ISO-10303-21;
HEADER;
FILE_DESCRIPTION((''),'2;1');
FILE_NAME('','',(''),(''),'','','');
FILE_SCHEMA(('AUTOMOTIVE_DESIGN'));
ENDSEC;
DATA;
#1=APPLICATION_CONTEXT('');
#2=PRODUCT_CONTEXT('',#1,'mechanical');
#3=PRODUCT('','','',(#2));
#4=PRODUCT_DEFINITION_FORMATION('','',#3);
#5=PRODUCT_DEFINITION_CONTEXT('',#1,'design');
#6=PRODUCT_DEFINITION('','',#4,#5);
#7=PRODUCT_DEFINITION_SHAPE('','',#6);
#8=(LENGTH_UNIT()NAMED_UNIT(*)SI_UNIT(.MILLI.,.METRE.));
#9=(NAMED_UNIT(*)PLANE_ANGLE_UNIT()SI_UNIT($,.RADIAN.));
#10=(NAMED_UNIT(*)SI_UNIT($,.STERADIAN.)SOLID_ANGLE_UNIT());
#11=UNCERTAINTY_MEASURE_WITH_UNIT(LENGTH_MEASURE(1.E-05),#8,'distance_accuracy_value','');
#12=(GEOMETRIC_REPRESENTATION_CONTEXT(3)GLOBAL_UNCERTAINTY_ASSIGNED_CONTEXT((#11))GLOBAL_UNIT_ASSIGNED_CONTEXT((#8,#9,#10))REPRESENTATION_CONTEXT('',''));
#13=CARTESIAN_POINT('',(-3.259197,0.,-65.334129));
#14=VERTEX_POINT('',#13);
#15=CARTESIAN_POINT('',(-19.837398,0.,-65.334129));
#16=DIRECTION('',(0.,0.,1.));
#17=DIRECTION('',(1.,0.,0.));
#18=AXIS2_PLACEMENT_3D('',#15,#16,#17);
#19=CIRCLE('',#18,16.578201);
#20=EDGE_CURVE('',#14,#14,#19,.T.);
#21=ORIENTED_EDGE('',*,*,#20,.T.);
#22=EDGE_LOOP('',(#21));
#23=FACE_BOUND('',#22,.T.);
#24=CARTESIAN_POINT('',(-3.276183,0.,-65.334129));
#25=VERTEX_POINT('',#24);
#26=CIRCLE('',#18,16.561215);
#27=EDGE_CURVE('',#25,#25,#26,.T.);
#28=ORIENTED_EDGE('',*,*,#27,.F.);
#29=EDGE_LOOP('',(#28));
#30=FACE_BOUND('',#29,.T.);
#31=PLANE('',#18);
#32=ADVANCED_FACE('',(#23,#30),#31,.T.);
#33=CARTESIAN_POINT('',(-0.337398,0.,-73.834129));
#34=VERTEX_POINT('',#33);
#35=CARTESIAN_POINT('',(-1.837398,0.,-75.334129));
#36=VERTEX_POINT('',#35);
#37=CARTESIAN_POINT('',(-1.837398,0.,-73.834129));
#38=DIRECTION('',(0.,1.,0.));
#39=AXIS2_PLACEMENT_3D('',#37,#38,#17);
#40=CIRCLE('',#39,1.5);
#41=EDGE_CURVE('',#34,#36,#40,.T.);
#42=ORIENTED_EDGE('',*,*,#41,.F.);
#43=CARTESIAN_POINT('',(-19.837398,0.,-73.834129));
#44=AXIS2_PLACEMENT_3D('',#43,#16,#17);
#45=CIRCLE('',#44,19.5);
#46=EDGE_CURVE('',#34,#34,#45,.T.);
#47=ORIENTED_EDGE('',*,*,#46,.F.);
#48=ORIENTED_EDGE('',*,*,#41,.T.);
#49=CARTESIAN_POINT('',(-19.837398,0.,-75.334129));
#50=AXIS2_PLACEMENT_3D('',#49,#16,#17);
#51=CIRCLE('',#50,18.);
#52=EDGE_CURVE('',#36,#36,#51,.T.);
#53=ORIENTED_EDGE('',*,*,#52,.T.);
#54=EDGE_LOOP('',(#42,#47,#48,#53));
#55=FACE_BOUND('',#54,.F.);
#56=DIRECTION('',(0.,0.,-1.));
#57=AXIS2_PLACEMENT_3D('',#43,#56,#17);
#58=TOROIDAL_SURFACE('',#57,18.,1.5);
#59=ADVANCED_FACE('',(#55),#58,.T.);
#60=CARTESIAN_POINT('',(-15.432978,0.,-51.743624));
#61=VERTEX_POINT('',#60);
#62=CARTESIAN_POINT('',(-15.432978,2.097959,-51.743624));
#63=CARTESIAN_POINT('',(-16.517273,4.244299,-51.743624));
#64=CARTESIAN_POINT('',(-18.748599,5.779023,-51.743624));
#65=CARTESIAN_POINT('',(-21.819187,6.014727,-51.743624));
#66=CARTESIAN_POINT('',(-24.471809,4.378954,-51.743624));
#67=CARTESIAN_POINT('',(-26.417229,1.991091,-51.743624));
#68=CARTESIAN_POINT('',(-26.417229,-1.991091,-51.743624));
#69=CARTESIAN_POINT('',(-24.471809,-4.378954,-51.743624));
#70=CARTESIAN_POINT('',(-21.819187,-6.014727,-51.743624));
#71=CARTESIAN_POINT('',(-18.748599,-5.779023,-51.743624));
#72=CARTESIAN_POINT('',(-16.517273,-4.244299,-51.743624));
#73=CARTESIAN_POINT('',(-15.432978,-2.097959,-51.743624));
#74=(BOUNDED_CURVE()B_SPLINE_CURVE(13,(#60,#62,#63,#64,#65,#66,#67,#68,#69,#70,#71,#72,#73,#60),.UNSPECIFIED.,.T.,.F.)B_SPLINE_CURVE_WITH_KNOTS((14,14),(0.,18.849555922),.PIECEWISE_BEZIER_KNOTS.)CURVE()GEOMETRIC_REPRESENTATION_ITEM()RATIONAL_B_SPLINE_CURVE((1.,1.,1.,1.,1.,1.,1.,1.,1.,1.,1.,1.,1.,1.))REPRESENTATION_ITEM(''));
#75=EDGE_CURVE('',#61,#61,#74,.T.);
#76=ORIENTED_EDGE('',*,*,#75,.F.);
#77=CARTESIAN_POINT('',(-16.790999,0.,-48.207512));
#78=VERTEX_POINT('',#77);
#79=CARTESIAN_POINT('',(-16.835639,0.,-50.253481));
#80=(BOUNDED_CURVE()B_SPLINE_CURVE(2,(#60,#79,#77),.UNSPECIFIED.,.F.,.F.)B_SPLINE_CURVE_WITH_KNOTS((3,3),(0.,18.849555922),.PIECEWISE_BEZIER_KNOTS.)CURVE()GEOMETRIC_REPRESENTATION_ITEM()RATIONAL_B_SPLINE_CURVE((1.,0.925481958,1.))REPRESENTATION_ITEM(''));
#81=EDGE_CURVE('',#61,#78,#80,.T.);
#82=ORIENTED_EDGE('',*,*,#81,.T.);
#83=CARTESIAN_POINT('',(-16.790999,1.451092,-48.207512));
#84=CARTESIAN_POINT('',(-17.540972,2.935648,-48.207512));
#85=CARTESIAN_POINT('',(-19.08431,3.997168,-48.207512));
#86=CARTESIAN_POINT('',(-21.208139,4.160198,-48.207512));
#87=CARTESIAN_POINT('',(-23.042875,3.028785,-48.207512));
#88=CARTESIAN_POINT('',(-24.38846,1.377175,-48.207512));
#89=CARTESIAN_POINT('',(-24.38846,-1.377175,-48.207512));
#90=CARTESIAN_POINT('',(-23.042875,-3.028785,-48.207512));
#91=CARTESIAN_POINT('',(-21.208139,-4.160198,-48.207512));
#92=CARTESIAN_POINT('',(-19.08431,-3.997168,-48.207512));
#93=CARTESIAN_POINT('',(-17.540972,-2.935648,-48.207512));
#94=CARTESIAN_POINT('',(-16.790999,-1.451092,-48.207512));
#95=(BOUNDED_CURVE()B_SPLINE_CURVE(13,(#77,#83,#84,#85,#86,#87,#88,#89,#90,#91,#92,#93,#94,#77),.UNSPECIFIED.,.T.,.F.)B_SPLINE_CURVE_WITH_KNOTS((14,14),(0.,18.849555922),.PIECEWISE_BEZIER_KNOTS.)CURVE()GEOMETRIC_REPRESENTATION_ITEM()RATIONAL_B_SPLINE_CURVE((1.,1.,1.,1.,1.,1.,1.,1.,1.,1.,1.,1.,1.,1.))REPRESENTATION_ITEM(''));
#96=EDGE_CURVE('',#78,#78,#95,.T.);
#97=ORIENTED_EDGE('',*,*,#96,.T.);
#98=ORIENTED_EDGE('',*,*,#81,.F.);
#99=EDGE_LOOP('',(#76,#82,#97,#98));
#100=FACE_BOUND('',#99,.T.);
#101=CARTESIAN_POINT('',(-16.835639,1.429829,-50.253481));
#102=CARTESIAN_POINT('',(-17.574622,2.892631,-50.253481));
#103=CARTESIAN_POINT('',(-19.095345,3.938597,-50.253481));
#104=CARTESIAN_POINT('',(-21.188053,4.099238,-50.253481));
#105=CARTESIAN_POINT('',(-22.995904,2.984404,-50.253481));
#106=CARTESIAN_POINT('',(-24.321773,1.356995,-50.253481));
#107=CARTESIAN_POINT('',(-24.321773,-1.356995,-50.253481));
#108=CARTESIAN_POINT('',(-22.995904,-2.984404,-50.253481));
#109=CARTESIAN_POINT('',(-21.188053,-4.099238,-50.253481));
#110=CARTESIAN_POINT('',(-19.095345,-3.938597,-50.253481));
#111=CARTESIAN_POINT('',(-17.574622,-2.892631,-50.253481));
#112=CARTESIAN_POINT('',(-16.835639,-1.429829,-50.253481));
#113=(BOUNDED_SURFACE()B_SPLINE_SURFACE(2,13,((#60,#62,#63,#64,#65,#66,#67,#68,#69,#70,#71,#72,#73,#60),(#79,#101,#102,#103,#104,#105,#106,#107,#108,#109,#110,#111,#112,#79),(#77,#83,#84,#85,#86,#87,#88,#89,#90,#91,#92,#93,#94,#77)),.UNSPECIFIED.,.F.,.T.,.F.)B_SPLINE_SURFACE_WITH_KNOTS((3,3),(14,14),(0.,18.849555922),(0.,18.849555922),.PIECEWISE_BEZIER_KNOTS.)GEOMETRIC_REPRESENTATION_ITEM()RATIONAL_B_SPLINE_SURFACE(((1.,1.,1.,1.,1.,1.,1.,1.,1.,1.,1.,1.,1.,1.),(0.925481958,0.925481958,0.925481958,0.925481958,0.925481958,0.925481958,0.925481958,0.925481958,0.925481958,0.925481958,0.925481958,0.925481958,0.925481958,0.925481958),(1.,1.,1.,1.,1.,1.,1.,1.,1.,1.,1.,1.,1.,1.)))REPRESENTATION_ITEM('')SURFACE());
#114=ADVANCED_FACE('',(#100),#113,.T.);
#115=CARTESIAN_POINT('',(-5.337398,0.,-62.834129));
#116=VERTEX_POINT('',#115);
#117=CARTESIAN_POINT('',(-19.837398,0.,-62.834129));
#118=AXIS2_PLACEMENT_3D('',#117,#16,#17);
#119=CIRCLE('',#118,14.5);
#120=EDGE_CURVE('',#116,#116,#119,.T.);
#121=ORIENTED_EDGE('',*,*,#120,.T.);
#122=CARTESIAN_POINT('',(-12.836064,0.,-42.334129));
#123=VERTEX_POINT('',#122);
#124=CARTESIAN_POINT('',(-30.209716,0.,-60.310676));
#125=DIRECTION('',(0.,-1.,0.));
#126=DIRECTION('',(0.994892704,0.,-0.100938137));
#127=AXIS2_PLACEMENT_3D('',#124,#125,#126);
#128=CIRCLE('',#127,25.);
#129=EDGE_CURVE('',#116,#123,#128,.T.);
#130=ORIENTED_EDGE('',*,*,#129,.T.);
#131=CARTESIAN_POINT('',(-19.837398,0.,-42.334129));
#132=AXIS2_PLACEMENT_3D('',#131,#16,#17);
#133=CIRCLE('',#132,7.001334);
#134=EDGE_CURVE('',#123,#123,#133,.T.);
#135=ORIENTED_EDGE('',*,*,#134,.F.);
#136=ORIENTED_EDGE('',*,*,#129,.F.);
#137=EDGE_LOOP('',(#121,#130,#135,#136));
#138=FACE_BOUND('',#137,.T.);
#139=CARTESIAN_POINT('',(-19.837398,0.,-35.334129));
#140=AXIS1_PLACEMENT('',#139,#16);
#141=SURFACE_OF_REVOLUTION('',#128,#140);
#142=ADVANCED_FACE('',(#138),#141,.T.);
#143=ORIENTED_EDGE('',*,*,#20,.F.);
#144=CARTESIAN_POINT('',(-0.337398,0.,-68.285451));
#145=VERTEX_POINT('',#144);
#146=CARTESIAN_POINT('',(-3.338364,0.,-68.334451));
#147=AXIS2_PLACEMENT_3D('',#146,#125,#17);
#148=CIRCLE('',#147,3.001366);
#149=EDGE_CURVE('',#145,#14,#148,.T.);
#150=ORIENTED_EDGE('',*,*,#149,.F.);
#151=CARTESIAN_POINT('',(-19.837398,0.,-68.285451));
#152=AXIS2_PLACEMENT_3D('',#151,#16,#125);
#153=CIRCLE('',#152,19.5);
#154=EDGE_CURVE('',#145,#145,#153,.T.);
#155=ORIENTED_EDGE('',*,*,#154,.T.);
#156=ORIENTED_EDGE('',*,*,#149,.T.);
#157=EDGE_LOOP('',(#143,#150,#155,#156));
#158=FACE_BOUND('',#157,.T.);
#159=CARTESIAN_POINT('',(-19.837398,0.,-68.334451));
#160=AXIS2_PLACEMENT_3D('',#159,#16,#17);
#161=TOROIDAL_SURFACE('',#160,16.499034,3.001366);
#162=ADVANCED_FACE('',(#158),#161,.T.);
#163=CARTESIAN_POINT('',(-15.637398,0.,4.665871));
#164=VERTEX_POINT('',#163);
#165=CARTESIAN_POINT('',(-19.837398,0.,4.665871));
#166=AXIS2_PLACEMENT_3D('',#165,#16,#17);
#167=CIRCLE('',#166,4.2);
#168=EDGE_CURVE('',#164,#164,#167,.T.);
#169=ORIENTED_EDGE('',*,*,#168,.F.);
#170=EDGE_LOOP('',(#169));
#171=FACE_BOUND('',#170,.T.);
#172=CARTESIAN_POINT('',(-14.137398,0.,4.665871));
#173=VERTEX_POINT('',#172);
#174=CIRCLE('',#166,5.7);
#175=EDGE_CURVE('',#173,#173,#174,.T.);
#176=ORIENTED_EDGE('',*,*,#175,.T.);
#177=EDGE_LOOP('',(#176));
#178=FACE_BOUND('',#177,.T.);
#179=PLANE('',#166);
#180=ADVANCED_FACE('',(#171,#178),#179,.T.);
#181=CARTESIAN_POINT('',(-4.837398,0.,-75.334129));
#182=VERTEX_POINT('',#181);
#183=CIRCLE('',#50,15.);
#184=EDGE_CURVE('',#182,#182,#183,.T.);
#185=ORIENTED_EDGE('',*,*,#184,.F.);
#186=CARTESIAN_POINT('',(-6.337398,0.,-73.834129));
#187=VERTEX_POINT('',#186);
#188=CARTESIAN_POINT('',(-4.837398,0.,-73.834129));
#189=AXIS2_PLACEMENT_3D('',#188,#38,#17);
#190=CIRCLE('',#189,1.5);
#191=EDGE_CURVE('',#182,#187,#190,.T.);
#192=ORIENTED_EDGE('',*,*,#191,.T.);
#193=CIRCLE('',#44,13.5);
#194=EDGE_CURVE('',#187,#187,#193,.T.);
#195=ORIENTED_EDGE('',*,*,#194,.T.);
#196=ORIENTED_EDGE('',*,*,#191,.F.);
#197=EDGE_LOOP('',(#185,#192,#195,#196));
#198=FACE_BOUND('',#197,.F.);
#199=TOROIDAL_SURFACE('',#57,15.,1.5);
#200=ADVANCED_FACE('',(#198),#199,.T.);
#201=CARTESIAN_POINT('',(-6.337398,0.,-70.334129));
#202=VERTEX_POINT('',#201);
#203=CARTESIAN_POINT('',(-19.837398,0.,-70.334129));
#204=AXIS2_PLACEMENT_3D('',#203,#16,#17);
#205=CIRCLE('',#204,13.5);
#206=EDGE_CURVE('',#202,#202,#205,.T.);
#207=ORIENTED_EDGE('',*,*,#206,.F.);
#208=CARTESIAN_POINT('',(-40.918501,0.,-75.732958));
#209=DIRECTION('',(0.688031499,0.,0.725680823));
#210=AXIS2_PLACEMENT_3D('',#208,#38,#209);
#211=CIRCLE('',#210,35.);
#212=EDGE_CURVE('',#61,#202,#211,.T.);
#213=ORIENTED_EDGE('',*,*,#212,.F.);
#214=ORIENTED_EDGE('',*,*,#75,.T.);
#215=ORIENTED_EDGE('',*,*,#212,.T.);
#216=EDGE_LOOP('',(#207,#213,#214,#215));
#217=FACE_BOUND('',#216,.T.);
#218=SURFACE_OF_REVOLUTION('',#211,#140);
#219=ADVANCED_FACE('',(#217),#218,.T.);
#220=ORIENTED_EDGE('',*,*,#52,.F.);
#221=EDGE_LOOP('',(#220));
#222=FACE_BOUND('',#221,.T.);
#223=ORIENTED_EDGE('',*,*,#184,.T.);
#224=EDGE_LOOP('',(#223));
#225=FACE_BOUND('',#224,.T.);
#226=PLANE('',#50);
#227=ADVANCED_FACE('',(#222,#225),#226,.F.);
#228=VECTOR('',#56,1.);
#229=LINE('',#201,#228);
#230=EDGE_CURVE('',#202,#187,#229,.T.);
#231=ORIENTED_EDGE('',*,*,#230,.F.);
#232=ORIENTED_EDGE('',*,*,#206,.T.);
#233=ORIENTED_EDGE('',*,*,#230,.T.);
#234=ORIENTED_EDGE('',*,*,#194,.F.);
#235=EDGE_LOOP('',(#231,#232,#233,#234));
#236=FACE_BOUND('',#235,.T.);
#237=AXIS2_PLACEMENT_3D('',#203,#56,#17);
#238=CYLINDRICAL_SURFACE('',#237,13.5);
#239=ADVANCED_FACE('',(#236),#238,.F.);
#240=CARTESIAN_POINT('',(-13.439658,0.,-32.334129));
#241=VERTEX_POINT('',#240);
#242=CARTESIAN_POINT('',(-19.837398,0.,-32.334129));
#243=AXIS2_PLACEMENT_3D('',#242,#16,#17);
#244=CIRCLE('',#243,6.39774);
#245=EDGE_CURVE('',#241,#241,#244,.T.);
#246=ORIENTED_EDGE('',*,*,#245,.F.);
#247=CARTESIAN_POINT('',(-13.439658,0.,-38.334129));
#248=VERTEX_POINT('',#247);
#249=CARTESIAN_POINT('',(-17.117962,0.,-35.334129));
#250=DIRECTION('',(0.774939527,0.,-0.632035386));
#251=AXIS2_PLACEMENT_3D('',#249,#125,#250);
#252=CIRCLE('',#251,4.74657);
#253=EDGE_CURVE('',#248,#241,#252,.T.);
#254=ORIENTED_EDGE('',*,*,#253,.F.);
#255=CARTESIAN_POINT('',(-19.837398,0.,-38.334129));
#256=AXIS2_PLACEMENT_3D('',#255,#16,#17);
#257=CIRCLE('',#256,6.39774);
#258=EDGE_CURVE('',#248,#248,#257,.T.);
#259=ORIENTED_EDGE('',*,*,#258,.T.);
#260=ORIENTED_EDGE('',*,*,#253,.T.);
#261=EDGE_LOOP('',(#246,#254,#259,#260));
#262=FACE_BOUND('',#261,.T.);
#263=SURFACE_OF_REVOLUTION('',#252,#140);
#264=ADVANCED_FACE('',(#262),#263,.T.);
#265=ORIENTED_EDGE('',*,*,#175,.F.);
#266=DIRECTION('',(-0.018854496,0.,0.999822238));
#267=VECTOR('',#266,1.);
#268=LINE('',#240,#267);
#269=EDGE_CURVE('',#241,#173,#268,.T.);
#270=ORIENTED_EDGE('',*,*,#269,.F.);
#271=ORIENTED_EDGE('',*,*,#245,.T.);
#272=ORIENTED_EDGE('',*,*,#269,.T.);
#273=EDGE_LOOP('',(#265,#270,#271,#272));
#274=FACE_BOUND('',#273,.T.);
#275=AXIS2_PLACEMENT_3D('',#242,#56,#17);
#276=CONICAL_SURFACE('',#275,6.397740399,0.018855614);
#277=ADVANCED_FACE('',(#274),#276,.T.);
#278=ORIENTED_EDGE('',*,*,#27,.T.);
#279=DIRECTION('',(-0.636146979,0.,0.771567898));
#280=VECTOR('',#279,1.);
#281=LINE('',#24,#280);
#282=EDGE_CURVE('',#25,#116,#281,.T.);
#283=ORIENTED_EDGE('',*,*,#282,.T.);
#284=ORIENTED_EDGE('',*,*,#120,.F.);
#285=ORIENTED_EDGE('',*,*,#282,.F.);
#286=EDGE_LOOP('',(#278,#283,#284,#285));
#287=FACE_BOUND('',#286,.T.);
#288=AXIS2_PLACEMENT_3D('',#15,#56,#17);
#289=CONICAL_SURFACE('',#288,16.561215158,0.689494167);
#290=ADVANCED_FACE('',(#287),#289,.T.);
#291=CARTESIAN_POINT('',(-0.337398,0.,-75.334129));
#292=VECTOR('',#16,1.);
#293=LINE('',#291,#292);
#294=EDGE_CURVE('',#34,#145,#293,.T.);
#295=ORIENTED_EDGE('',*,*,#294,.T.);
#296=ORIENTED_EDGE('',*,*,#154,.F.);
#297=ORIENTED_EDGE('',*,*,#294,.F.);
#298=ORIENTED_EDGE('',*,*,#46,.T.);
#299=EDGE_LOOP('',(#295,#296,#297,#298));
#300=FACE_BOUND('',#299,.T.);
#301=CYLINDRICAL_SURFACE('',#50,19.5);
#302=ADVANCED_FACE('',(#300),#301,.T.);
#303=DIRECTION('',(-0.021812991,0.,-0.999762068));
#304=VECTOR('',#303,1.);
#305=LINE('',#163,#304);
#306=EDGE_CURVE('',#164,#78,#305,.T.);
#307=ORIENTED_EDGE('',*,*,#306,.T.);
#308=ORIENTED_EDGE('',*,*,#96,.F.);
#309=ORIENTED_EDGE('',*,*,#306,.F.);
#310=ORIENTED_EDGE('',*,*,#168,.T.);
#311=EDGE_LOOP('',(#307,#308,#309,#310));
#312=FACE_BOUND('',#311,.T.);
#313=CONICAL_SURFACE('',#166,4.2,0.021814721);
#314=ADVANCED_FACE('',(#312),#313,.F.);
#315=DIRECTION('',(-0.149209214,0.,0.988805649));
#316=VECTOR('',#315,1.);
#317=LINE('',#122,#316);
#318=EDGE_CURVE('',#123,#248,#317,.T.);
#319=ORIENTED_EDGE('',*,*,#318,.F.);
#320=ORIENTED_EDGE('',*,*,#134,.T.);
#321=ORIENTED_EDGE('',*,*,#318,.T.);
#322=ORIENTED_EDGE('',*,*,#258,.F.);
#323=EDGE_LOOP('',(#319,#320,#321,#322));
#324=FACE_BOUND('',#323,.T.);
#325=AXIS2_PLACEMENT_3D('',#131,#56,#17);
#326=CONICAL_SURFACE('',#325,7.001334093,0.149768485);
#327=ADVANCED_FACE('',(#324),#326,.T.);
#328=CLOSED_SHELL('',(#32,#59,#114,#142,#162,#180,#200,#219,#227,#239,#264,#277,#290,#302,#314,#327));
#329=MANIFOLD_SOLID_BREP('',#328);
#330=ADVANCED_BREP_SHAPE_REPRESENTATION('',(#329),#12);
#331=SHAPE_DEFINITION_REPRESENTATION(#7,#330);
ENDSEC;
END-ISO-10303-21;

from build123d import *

# Parameters (mm, degrees)
F3_R = 1.5
F4_R = 5


# Not quite as in the source:
# - a fillet or chamfer that OpenCascade refuses, or shapes differently, is made with other operations: its cross-section is extruded or revolved along the edge and cut away or added


with BuildPart() as f1:
    # F0 (on Front) → F1 (revolve)
    with BuildSketch(Plane.XZ):
        with BuildLine():
            Line((-3.2761832158, -65.334129345), (-5.337398374, -62.834129345))
            ThreePointArc((-5.337398374, -62.834129345), (-6.7311516997, -51.7224852161), (-12.8360642807, -42.334129345))
            Line((-12.8360642807, -42.334129345), (-13.4396579748, -38.334129345))
            ThreePointArc((-13.4396579748, -38.334129345), (-12.3713927582, -35.334129345), (-13.4396579748, -32.334129345))
            Line((-13.4396579748, -32.334129345), (-14.137398374, 4.665870655))
            Line((-14.137398374, 4.665870655), (-15.637398374, 4.665870655))
            Line((-15.637398374, 4.665870655), (-16.837398374, -50.334129345))
            ThreePointArc((-16.837398374, -50.334129345), (-9.9295742391, -59.4637716742), (-6.337398374, -70.334129345))
            Line((-6.337398374, -70.334129345), (-6.337398374, -75.334129345))
            Line((-6.337398374, -75.334129345), (-0.337398374, -75.334129345))
            Line((-0.337398374, -75.334129345), (-0.337398374, -65.334129345))
            Line((-0.337398374, -65.334129345), (-3.2761832158, -65.334129345))
        make_face()
    revolve(axis=Axis((-19.837398374, 0, -35.334129345), (0, 0, 1)))

    # F2: fillet of radius 3 on 1 edges, made by hand

    # F2_s1 → F2_t2 (revolve, cut)
    with BuildSketch(Plane.XZ):
        with BuildLine():
            ThreePointArc((-0.336998374, -68.3344507591), (-1.1942035822, -66.2342669991), (-3.2761749277, -65.3337294309))
            Line((-3.2761749277, -65.3337294309), (-3.2699560145, -65.0336572981))
            ThreePointArc((-3.2699560145, -65.0336572981), (-1.8067866508, -65.0339927765), (-0.337398374, -65.0339927765))
            Line((-0.337398374, -65.0339927765), (-0.0372618054, -65.334129345))
            ThreePointArc((-0.0372618054, -65.334129345), (-0.0372618054, -66.8342900521), (-0.0368618054, -68.3344507591))
            Line((-0.0368618054, -68.3344507591), (-0.336998374, -68.3344507591))
        make_face()
    revolve(axis=Axis((-19.837398374, 0, -65.334129345), (0, 0, 1)), mode=Mode.SUBTRACT)

    # F3
    f3_edges = [f1.edges().sort_by_distance(p)[0] for p in [
        (-33.337398, 0, -75.334129),
        (-39.337398, 0, -75.334129),
    ]]
    fillet(f3_edges, radius=F3_R)

    # F4
    f4_edges = [f1.edges().sort_by_distance(p)[0] for p in [
        (-22.837398, 0, -50.334129),
    ]]
    fillet(f4_edges, radius=F4_R)


solid = f1.part
